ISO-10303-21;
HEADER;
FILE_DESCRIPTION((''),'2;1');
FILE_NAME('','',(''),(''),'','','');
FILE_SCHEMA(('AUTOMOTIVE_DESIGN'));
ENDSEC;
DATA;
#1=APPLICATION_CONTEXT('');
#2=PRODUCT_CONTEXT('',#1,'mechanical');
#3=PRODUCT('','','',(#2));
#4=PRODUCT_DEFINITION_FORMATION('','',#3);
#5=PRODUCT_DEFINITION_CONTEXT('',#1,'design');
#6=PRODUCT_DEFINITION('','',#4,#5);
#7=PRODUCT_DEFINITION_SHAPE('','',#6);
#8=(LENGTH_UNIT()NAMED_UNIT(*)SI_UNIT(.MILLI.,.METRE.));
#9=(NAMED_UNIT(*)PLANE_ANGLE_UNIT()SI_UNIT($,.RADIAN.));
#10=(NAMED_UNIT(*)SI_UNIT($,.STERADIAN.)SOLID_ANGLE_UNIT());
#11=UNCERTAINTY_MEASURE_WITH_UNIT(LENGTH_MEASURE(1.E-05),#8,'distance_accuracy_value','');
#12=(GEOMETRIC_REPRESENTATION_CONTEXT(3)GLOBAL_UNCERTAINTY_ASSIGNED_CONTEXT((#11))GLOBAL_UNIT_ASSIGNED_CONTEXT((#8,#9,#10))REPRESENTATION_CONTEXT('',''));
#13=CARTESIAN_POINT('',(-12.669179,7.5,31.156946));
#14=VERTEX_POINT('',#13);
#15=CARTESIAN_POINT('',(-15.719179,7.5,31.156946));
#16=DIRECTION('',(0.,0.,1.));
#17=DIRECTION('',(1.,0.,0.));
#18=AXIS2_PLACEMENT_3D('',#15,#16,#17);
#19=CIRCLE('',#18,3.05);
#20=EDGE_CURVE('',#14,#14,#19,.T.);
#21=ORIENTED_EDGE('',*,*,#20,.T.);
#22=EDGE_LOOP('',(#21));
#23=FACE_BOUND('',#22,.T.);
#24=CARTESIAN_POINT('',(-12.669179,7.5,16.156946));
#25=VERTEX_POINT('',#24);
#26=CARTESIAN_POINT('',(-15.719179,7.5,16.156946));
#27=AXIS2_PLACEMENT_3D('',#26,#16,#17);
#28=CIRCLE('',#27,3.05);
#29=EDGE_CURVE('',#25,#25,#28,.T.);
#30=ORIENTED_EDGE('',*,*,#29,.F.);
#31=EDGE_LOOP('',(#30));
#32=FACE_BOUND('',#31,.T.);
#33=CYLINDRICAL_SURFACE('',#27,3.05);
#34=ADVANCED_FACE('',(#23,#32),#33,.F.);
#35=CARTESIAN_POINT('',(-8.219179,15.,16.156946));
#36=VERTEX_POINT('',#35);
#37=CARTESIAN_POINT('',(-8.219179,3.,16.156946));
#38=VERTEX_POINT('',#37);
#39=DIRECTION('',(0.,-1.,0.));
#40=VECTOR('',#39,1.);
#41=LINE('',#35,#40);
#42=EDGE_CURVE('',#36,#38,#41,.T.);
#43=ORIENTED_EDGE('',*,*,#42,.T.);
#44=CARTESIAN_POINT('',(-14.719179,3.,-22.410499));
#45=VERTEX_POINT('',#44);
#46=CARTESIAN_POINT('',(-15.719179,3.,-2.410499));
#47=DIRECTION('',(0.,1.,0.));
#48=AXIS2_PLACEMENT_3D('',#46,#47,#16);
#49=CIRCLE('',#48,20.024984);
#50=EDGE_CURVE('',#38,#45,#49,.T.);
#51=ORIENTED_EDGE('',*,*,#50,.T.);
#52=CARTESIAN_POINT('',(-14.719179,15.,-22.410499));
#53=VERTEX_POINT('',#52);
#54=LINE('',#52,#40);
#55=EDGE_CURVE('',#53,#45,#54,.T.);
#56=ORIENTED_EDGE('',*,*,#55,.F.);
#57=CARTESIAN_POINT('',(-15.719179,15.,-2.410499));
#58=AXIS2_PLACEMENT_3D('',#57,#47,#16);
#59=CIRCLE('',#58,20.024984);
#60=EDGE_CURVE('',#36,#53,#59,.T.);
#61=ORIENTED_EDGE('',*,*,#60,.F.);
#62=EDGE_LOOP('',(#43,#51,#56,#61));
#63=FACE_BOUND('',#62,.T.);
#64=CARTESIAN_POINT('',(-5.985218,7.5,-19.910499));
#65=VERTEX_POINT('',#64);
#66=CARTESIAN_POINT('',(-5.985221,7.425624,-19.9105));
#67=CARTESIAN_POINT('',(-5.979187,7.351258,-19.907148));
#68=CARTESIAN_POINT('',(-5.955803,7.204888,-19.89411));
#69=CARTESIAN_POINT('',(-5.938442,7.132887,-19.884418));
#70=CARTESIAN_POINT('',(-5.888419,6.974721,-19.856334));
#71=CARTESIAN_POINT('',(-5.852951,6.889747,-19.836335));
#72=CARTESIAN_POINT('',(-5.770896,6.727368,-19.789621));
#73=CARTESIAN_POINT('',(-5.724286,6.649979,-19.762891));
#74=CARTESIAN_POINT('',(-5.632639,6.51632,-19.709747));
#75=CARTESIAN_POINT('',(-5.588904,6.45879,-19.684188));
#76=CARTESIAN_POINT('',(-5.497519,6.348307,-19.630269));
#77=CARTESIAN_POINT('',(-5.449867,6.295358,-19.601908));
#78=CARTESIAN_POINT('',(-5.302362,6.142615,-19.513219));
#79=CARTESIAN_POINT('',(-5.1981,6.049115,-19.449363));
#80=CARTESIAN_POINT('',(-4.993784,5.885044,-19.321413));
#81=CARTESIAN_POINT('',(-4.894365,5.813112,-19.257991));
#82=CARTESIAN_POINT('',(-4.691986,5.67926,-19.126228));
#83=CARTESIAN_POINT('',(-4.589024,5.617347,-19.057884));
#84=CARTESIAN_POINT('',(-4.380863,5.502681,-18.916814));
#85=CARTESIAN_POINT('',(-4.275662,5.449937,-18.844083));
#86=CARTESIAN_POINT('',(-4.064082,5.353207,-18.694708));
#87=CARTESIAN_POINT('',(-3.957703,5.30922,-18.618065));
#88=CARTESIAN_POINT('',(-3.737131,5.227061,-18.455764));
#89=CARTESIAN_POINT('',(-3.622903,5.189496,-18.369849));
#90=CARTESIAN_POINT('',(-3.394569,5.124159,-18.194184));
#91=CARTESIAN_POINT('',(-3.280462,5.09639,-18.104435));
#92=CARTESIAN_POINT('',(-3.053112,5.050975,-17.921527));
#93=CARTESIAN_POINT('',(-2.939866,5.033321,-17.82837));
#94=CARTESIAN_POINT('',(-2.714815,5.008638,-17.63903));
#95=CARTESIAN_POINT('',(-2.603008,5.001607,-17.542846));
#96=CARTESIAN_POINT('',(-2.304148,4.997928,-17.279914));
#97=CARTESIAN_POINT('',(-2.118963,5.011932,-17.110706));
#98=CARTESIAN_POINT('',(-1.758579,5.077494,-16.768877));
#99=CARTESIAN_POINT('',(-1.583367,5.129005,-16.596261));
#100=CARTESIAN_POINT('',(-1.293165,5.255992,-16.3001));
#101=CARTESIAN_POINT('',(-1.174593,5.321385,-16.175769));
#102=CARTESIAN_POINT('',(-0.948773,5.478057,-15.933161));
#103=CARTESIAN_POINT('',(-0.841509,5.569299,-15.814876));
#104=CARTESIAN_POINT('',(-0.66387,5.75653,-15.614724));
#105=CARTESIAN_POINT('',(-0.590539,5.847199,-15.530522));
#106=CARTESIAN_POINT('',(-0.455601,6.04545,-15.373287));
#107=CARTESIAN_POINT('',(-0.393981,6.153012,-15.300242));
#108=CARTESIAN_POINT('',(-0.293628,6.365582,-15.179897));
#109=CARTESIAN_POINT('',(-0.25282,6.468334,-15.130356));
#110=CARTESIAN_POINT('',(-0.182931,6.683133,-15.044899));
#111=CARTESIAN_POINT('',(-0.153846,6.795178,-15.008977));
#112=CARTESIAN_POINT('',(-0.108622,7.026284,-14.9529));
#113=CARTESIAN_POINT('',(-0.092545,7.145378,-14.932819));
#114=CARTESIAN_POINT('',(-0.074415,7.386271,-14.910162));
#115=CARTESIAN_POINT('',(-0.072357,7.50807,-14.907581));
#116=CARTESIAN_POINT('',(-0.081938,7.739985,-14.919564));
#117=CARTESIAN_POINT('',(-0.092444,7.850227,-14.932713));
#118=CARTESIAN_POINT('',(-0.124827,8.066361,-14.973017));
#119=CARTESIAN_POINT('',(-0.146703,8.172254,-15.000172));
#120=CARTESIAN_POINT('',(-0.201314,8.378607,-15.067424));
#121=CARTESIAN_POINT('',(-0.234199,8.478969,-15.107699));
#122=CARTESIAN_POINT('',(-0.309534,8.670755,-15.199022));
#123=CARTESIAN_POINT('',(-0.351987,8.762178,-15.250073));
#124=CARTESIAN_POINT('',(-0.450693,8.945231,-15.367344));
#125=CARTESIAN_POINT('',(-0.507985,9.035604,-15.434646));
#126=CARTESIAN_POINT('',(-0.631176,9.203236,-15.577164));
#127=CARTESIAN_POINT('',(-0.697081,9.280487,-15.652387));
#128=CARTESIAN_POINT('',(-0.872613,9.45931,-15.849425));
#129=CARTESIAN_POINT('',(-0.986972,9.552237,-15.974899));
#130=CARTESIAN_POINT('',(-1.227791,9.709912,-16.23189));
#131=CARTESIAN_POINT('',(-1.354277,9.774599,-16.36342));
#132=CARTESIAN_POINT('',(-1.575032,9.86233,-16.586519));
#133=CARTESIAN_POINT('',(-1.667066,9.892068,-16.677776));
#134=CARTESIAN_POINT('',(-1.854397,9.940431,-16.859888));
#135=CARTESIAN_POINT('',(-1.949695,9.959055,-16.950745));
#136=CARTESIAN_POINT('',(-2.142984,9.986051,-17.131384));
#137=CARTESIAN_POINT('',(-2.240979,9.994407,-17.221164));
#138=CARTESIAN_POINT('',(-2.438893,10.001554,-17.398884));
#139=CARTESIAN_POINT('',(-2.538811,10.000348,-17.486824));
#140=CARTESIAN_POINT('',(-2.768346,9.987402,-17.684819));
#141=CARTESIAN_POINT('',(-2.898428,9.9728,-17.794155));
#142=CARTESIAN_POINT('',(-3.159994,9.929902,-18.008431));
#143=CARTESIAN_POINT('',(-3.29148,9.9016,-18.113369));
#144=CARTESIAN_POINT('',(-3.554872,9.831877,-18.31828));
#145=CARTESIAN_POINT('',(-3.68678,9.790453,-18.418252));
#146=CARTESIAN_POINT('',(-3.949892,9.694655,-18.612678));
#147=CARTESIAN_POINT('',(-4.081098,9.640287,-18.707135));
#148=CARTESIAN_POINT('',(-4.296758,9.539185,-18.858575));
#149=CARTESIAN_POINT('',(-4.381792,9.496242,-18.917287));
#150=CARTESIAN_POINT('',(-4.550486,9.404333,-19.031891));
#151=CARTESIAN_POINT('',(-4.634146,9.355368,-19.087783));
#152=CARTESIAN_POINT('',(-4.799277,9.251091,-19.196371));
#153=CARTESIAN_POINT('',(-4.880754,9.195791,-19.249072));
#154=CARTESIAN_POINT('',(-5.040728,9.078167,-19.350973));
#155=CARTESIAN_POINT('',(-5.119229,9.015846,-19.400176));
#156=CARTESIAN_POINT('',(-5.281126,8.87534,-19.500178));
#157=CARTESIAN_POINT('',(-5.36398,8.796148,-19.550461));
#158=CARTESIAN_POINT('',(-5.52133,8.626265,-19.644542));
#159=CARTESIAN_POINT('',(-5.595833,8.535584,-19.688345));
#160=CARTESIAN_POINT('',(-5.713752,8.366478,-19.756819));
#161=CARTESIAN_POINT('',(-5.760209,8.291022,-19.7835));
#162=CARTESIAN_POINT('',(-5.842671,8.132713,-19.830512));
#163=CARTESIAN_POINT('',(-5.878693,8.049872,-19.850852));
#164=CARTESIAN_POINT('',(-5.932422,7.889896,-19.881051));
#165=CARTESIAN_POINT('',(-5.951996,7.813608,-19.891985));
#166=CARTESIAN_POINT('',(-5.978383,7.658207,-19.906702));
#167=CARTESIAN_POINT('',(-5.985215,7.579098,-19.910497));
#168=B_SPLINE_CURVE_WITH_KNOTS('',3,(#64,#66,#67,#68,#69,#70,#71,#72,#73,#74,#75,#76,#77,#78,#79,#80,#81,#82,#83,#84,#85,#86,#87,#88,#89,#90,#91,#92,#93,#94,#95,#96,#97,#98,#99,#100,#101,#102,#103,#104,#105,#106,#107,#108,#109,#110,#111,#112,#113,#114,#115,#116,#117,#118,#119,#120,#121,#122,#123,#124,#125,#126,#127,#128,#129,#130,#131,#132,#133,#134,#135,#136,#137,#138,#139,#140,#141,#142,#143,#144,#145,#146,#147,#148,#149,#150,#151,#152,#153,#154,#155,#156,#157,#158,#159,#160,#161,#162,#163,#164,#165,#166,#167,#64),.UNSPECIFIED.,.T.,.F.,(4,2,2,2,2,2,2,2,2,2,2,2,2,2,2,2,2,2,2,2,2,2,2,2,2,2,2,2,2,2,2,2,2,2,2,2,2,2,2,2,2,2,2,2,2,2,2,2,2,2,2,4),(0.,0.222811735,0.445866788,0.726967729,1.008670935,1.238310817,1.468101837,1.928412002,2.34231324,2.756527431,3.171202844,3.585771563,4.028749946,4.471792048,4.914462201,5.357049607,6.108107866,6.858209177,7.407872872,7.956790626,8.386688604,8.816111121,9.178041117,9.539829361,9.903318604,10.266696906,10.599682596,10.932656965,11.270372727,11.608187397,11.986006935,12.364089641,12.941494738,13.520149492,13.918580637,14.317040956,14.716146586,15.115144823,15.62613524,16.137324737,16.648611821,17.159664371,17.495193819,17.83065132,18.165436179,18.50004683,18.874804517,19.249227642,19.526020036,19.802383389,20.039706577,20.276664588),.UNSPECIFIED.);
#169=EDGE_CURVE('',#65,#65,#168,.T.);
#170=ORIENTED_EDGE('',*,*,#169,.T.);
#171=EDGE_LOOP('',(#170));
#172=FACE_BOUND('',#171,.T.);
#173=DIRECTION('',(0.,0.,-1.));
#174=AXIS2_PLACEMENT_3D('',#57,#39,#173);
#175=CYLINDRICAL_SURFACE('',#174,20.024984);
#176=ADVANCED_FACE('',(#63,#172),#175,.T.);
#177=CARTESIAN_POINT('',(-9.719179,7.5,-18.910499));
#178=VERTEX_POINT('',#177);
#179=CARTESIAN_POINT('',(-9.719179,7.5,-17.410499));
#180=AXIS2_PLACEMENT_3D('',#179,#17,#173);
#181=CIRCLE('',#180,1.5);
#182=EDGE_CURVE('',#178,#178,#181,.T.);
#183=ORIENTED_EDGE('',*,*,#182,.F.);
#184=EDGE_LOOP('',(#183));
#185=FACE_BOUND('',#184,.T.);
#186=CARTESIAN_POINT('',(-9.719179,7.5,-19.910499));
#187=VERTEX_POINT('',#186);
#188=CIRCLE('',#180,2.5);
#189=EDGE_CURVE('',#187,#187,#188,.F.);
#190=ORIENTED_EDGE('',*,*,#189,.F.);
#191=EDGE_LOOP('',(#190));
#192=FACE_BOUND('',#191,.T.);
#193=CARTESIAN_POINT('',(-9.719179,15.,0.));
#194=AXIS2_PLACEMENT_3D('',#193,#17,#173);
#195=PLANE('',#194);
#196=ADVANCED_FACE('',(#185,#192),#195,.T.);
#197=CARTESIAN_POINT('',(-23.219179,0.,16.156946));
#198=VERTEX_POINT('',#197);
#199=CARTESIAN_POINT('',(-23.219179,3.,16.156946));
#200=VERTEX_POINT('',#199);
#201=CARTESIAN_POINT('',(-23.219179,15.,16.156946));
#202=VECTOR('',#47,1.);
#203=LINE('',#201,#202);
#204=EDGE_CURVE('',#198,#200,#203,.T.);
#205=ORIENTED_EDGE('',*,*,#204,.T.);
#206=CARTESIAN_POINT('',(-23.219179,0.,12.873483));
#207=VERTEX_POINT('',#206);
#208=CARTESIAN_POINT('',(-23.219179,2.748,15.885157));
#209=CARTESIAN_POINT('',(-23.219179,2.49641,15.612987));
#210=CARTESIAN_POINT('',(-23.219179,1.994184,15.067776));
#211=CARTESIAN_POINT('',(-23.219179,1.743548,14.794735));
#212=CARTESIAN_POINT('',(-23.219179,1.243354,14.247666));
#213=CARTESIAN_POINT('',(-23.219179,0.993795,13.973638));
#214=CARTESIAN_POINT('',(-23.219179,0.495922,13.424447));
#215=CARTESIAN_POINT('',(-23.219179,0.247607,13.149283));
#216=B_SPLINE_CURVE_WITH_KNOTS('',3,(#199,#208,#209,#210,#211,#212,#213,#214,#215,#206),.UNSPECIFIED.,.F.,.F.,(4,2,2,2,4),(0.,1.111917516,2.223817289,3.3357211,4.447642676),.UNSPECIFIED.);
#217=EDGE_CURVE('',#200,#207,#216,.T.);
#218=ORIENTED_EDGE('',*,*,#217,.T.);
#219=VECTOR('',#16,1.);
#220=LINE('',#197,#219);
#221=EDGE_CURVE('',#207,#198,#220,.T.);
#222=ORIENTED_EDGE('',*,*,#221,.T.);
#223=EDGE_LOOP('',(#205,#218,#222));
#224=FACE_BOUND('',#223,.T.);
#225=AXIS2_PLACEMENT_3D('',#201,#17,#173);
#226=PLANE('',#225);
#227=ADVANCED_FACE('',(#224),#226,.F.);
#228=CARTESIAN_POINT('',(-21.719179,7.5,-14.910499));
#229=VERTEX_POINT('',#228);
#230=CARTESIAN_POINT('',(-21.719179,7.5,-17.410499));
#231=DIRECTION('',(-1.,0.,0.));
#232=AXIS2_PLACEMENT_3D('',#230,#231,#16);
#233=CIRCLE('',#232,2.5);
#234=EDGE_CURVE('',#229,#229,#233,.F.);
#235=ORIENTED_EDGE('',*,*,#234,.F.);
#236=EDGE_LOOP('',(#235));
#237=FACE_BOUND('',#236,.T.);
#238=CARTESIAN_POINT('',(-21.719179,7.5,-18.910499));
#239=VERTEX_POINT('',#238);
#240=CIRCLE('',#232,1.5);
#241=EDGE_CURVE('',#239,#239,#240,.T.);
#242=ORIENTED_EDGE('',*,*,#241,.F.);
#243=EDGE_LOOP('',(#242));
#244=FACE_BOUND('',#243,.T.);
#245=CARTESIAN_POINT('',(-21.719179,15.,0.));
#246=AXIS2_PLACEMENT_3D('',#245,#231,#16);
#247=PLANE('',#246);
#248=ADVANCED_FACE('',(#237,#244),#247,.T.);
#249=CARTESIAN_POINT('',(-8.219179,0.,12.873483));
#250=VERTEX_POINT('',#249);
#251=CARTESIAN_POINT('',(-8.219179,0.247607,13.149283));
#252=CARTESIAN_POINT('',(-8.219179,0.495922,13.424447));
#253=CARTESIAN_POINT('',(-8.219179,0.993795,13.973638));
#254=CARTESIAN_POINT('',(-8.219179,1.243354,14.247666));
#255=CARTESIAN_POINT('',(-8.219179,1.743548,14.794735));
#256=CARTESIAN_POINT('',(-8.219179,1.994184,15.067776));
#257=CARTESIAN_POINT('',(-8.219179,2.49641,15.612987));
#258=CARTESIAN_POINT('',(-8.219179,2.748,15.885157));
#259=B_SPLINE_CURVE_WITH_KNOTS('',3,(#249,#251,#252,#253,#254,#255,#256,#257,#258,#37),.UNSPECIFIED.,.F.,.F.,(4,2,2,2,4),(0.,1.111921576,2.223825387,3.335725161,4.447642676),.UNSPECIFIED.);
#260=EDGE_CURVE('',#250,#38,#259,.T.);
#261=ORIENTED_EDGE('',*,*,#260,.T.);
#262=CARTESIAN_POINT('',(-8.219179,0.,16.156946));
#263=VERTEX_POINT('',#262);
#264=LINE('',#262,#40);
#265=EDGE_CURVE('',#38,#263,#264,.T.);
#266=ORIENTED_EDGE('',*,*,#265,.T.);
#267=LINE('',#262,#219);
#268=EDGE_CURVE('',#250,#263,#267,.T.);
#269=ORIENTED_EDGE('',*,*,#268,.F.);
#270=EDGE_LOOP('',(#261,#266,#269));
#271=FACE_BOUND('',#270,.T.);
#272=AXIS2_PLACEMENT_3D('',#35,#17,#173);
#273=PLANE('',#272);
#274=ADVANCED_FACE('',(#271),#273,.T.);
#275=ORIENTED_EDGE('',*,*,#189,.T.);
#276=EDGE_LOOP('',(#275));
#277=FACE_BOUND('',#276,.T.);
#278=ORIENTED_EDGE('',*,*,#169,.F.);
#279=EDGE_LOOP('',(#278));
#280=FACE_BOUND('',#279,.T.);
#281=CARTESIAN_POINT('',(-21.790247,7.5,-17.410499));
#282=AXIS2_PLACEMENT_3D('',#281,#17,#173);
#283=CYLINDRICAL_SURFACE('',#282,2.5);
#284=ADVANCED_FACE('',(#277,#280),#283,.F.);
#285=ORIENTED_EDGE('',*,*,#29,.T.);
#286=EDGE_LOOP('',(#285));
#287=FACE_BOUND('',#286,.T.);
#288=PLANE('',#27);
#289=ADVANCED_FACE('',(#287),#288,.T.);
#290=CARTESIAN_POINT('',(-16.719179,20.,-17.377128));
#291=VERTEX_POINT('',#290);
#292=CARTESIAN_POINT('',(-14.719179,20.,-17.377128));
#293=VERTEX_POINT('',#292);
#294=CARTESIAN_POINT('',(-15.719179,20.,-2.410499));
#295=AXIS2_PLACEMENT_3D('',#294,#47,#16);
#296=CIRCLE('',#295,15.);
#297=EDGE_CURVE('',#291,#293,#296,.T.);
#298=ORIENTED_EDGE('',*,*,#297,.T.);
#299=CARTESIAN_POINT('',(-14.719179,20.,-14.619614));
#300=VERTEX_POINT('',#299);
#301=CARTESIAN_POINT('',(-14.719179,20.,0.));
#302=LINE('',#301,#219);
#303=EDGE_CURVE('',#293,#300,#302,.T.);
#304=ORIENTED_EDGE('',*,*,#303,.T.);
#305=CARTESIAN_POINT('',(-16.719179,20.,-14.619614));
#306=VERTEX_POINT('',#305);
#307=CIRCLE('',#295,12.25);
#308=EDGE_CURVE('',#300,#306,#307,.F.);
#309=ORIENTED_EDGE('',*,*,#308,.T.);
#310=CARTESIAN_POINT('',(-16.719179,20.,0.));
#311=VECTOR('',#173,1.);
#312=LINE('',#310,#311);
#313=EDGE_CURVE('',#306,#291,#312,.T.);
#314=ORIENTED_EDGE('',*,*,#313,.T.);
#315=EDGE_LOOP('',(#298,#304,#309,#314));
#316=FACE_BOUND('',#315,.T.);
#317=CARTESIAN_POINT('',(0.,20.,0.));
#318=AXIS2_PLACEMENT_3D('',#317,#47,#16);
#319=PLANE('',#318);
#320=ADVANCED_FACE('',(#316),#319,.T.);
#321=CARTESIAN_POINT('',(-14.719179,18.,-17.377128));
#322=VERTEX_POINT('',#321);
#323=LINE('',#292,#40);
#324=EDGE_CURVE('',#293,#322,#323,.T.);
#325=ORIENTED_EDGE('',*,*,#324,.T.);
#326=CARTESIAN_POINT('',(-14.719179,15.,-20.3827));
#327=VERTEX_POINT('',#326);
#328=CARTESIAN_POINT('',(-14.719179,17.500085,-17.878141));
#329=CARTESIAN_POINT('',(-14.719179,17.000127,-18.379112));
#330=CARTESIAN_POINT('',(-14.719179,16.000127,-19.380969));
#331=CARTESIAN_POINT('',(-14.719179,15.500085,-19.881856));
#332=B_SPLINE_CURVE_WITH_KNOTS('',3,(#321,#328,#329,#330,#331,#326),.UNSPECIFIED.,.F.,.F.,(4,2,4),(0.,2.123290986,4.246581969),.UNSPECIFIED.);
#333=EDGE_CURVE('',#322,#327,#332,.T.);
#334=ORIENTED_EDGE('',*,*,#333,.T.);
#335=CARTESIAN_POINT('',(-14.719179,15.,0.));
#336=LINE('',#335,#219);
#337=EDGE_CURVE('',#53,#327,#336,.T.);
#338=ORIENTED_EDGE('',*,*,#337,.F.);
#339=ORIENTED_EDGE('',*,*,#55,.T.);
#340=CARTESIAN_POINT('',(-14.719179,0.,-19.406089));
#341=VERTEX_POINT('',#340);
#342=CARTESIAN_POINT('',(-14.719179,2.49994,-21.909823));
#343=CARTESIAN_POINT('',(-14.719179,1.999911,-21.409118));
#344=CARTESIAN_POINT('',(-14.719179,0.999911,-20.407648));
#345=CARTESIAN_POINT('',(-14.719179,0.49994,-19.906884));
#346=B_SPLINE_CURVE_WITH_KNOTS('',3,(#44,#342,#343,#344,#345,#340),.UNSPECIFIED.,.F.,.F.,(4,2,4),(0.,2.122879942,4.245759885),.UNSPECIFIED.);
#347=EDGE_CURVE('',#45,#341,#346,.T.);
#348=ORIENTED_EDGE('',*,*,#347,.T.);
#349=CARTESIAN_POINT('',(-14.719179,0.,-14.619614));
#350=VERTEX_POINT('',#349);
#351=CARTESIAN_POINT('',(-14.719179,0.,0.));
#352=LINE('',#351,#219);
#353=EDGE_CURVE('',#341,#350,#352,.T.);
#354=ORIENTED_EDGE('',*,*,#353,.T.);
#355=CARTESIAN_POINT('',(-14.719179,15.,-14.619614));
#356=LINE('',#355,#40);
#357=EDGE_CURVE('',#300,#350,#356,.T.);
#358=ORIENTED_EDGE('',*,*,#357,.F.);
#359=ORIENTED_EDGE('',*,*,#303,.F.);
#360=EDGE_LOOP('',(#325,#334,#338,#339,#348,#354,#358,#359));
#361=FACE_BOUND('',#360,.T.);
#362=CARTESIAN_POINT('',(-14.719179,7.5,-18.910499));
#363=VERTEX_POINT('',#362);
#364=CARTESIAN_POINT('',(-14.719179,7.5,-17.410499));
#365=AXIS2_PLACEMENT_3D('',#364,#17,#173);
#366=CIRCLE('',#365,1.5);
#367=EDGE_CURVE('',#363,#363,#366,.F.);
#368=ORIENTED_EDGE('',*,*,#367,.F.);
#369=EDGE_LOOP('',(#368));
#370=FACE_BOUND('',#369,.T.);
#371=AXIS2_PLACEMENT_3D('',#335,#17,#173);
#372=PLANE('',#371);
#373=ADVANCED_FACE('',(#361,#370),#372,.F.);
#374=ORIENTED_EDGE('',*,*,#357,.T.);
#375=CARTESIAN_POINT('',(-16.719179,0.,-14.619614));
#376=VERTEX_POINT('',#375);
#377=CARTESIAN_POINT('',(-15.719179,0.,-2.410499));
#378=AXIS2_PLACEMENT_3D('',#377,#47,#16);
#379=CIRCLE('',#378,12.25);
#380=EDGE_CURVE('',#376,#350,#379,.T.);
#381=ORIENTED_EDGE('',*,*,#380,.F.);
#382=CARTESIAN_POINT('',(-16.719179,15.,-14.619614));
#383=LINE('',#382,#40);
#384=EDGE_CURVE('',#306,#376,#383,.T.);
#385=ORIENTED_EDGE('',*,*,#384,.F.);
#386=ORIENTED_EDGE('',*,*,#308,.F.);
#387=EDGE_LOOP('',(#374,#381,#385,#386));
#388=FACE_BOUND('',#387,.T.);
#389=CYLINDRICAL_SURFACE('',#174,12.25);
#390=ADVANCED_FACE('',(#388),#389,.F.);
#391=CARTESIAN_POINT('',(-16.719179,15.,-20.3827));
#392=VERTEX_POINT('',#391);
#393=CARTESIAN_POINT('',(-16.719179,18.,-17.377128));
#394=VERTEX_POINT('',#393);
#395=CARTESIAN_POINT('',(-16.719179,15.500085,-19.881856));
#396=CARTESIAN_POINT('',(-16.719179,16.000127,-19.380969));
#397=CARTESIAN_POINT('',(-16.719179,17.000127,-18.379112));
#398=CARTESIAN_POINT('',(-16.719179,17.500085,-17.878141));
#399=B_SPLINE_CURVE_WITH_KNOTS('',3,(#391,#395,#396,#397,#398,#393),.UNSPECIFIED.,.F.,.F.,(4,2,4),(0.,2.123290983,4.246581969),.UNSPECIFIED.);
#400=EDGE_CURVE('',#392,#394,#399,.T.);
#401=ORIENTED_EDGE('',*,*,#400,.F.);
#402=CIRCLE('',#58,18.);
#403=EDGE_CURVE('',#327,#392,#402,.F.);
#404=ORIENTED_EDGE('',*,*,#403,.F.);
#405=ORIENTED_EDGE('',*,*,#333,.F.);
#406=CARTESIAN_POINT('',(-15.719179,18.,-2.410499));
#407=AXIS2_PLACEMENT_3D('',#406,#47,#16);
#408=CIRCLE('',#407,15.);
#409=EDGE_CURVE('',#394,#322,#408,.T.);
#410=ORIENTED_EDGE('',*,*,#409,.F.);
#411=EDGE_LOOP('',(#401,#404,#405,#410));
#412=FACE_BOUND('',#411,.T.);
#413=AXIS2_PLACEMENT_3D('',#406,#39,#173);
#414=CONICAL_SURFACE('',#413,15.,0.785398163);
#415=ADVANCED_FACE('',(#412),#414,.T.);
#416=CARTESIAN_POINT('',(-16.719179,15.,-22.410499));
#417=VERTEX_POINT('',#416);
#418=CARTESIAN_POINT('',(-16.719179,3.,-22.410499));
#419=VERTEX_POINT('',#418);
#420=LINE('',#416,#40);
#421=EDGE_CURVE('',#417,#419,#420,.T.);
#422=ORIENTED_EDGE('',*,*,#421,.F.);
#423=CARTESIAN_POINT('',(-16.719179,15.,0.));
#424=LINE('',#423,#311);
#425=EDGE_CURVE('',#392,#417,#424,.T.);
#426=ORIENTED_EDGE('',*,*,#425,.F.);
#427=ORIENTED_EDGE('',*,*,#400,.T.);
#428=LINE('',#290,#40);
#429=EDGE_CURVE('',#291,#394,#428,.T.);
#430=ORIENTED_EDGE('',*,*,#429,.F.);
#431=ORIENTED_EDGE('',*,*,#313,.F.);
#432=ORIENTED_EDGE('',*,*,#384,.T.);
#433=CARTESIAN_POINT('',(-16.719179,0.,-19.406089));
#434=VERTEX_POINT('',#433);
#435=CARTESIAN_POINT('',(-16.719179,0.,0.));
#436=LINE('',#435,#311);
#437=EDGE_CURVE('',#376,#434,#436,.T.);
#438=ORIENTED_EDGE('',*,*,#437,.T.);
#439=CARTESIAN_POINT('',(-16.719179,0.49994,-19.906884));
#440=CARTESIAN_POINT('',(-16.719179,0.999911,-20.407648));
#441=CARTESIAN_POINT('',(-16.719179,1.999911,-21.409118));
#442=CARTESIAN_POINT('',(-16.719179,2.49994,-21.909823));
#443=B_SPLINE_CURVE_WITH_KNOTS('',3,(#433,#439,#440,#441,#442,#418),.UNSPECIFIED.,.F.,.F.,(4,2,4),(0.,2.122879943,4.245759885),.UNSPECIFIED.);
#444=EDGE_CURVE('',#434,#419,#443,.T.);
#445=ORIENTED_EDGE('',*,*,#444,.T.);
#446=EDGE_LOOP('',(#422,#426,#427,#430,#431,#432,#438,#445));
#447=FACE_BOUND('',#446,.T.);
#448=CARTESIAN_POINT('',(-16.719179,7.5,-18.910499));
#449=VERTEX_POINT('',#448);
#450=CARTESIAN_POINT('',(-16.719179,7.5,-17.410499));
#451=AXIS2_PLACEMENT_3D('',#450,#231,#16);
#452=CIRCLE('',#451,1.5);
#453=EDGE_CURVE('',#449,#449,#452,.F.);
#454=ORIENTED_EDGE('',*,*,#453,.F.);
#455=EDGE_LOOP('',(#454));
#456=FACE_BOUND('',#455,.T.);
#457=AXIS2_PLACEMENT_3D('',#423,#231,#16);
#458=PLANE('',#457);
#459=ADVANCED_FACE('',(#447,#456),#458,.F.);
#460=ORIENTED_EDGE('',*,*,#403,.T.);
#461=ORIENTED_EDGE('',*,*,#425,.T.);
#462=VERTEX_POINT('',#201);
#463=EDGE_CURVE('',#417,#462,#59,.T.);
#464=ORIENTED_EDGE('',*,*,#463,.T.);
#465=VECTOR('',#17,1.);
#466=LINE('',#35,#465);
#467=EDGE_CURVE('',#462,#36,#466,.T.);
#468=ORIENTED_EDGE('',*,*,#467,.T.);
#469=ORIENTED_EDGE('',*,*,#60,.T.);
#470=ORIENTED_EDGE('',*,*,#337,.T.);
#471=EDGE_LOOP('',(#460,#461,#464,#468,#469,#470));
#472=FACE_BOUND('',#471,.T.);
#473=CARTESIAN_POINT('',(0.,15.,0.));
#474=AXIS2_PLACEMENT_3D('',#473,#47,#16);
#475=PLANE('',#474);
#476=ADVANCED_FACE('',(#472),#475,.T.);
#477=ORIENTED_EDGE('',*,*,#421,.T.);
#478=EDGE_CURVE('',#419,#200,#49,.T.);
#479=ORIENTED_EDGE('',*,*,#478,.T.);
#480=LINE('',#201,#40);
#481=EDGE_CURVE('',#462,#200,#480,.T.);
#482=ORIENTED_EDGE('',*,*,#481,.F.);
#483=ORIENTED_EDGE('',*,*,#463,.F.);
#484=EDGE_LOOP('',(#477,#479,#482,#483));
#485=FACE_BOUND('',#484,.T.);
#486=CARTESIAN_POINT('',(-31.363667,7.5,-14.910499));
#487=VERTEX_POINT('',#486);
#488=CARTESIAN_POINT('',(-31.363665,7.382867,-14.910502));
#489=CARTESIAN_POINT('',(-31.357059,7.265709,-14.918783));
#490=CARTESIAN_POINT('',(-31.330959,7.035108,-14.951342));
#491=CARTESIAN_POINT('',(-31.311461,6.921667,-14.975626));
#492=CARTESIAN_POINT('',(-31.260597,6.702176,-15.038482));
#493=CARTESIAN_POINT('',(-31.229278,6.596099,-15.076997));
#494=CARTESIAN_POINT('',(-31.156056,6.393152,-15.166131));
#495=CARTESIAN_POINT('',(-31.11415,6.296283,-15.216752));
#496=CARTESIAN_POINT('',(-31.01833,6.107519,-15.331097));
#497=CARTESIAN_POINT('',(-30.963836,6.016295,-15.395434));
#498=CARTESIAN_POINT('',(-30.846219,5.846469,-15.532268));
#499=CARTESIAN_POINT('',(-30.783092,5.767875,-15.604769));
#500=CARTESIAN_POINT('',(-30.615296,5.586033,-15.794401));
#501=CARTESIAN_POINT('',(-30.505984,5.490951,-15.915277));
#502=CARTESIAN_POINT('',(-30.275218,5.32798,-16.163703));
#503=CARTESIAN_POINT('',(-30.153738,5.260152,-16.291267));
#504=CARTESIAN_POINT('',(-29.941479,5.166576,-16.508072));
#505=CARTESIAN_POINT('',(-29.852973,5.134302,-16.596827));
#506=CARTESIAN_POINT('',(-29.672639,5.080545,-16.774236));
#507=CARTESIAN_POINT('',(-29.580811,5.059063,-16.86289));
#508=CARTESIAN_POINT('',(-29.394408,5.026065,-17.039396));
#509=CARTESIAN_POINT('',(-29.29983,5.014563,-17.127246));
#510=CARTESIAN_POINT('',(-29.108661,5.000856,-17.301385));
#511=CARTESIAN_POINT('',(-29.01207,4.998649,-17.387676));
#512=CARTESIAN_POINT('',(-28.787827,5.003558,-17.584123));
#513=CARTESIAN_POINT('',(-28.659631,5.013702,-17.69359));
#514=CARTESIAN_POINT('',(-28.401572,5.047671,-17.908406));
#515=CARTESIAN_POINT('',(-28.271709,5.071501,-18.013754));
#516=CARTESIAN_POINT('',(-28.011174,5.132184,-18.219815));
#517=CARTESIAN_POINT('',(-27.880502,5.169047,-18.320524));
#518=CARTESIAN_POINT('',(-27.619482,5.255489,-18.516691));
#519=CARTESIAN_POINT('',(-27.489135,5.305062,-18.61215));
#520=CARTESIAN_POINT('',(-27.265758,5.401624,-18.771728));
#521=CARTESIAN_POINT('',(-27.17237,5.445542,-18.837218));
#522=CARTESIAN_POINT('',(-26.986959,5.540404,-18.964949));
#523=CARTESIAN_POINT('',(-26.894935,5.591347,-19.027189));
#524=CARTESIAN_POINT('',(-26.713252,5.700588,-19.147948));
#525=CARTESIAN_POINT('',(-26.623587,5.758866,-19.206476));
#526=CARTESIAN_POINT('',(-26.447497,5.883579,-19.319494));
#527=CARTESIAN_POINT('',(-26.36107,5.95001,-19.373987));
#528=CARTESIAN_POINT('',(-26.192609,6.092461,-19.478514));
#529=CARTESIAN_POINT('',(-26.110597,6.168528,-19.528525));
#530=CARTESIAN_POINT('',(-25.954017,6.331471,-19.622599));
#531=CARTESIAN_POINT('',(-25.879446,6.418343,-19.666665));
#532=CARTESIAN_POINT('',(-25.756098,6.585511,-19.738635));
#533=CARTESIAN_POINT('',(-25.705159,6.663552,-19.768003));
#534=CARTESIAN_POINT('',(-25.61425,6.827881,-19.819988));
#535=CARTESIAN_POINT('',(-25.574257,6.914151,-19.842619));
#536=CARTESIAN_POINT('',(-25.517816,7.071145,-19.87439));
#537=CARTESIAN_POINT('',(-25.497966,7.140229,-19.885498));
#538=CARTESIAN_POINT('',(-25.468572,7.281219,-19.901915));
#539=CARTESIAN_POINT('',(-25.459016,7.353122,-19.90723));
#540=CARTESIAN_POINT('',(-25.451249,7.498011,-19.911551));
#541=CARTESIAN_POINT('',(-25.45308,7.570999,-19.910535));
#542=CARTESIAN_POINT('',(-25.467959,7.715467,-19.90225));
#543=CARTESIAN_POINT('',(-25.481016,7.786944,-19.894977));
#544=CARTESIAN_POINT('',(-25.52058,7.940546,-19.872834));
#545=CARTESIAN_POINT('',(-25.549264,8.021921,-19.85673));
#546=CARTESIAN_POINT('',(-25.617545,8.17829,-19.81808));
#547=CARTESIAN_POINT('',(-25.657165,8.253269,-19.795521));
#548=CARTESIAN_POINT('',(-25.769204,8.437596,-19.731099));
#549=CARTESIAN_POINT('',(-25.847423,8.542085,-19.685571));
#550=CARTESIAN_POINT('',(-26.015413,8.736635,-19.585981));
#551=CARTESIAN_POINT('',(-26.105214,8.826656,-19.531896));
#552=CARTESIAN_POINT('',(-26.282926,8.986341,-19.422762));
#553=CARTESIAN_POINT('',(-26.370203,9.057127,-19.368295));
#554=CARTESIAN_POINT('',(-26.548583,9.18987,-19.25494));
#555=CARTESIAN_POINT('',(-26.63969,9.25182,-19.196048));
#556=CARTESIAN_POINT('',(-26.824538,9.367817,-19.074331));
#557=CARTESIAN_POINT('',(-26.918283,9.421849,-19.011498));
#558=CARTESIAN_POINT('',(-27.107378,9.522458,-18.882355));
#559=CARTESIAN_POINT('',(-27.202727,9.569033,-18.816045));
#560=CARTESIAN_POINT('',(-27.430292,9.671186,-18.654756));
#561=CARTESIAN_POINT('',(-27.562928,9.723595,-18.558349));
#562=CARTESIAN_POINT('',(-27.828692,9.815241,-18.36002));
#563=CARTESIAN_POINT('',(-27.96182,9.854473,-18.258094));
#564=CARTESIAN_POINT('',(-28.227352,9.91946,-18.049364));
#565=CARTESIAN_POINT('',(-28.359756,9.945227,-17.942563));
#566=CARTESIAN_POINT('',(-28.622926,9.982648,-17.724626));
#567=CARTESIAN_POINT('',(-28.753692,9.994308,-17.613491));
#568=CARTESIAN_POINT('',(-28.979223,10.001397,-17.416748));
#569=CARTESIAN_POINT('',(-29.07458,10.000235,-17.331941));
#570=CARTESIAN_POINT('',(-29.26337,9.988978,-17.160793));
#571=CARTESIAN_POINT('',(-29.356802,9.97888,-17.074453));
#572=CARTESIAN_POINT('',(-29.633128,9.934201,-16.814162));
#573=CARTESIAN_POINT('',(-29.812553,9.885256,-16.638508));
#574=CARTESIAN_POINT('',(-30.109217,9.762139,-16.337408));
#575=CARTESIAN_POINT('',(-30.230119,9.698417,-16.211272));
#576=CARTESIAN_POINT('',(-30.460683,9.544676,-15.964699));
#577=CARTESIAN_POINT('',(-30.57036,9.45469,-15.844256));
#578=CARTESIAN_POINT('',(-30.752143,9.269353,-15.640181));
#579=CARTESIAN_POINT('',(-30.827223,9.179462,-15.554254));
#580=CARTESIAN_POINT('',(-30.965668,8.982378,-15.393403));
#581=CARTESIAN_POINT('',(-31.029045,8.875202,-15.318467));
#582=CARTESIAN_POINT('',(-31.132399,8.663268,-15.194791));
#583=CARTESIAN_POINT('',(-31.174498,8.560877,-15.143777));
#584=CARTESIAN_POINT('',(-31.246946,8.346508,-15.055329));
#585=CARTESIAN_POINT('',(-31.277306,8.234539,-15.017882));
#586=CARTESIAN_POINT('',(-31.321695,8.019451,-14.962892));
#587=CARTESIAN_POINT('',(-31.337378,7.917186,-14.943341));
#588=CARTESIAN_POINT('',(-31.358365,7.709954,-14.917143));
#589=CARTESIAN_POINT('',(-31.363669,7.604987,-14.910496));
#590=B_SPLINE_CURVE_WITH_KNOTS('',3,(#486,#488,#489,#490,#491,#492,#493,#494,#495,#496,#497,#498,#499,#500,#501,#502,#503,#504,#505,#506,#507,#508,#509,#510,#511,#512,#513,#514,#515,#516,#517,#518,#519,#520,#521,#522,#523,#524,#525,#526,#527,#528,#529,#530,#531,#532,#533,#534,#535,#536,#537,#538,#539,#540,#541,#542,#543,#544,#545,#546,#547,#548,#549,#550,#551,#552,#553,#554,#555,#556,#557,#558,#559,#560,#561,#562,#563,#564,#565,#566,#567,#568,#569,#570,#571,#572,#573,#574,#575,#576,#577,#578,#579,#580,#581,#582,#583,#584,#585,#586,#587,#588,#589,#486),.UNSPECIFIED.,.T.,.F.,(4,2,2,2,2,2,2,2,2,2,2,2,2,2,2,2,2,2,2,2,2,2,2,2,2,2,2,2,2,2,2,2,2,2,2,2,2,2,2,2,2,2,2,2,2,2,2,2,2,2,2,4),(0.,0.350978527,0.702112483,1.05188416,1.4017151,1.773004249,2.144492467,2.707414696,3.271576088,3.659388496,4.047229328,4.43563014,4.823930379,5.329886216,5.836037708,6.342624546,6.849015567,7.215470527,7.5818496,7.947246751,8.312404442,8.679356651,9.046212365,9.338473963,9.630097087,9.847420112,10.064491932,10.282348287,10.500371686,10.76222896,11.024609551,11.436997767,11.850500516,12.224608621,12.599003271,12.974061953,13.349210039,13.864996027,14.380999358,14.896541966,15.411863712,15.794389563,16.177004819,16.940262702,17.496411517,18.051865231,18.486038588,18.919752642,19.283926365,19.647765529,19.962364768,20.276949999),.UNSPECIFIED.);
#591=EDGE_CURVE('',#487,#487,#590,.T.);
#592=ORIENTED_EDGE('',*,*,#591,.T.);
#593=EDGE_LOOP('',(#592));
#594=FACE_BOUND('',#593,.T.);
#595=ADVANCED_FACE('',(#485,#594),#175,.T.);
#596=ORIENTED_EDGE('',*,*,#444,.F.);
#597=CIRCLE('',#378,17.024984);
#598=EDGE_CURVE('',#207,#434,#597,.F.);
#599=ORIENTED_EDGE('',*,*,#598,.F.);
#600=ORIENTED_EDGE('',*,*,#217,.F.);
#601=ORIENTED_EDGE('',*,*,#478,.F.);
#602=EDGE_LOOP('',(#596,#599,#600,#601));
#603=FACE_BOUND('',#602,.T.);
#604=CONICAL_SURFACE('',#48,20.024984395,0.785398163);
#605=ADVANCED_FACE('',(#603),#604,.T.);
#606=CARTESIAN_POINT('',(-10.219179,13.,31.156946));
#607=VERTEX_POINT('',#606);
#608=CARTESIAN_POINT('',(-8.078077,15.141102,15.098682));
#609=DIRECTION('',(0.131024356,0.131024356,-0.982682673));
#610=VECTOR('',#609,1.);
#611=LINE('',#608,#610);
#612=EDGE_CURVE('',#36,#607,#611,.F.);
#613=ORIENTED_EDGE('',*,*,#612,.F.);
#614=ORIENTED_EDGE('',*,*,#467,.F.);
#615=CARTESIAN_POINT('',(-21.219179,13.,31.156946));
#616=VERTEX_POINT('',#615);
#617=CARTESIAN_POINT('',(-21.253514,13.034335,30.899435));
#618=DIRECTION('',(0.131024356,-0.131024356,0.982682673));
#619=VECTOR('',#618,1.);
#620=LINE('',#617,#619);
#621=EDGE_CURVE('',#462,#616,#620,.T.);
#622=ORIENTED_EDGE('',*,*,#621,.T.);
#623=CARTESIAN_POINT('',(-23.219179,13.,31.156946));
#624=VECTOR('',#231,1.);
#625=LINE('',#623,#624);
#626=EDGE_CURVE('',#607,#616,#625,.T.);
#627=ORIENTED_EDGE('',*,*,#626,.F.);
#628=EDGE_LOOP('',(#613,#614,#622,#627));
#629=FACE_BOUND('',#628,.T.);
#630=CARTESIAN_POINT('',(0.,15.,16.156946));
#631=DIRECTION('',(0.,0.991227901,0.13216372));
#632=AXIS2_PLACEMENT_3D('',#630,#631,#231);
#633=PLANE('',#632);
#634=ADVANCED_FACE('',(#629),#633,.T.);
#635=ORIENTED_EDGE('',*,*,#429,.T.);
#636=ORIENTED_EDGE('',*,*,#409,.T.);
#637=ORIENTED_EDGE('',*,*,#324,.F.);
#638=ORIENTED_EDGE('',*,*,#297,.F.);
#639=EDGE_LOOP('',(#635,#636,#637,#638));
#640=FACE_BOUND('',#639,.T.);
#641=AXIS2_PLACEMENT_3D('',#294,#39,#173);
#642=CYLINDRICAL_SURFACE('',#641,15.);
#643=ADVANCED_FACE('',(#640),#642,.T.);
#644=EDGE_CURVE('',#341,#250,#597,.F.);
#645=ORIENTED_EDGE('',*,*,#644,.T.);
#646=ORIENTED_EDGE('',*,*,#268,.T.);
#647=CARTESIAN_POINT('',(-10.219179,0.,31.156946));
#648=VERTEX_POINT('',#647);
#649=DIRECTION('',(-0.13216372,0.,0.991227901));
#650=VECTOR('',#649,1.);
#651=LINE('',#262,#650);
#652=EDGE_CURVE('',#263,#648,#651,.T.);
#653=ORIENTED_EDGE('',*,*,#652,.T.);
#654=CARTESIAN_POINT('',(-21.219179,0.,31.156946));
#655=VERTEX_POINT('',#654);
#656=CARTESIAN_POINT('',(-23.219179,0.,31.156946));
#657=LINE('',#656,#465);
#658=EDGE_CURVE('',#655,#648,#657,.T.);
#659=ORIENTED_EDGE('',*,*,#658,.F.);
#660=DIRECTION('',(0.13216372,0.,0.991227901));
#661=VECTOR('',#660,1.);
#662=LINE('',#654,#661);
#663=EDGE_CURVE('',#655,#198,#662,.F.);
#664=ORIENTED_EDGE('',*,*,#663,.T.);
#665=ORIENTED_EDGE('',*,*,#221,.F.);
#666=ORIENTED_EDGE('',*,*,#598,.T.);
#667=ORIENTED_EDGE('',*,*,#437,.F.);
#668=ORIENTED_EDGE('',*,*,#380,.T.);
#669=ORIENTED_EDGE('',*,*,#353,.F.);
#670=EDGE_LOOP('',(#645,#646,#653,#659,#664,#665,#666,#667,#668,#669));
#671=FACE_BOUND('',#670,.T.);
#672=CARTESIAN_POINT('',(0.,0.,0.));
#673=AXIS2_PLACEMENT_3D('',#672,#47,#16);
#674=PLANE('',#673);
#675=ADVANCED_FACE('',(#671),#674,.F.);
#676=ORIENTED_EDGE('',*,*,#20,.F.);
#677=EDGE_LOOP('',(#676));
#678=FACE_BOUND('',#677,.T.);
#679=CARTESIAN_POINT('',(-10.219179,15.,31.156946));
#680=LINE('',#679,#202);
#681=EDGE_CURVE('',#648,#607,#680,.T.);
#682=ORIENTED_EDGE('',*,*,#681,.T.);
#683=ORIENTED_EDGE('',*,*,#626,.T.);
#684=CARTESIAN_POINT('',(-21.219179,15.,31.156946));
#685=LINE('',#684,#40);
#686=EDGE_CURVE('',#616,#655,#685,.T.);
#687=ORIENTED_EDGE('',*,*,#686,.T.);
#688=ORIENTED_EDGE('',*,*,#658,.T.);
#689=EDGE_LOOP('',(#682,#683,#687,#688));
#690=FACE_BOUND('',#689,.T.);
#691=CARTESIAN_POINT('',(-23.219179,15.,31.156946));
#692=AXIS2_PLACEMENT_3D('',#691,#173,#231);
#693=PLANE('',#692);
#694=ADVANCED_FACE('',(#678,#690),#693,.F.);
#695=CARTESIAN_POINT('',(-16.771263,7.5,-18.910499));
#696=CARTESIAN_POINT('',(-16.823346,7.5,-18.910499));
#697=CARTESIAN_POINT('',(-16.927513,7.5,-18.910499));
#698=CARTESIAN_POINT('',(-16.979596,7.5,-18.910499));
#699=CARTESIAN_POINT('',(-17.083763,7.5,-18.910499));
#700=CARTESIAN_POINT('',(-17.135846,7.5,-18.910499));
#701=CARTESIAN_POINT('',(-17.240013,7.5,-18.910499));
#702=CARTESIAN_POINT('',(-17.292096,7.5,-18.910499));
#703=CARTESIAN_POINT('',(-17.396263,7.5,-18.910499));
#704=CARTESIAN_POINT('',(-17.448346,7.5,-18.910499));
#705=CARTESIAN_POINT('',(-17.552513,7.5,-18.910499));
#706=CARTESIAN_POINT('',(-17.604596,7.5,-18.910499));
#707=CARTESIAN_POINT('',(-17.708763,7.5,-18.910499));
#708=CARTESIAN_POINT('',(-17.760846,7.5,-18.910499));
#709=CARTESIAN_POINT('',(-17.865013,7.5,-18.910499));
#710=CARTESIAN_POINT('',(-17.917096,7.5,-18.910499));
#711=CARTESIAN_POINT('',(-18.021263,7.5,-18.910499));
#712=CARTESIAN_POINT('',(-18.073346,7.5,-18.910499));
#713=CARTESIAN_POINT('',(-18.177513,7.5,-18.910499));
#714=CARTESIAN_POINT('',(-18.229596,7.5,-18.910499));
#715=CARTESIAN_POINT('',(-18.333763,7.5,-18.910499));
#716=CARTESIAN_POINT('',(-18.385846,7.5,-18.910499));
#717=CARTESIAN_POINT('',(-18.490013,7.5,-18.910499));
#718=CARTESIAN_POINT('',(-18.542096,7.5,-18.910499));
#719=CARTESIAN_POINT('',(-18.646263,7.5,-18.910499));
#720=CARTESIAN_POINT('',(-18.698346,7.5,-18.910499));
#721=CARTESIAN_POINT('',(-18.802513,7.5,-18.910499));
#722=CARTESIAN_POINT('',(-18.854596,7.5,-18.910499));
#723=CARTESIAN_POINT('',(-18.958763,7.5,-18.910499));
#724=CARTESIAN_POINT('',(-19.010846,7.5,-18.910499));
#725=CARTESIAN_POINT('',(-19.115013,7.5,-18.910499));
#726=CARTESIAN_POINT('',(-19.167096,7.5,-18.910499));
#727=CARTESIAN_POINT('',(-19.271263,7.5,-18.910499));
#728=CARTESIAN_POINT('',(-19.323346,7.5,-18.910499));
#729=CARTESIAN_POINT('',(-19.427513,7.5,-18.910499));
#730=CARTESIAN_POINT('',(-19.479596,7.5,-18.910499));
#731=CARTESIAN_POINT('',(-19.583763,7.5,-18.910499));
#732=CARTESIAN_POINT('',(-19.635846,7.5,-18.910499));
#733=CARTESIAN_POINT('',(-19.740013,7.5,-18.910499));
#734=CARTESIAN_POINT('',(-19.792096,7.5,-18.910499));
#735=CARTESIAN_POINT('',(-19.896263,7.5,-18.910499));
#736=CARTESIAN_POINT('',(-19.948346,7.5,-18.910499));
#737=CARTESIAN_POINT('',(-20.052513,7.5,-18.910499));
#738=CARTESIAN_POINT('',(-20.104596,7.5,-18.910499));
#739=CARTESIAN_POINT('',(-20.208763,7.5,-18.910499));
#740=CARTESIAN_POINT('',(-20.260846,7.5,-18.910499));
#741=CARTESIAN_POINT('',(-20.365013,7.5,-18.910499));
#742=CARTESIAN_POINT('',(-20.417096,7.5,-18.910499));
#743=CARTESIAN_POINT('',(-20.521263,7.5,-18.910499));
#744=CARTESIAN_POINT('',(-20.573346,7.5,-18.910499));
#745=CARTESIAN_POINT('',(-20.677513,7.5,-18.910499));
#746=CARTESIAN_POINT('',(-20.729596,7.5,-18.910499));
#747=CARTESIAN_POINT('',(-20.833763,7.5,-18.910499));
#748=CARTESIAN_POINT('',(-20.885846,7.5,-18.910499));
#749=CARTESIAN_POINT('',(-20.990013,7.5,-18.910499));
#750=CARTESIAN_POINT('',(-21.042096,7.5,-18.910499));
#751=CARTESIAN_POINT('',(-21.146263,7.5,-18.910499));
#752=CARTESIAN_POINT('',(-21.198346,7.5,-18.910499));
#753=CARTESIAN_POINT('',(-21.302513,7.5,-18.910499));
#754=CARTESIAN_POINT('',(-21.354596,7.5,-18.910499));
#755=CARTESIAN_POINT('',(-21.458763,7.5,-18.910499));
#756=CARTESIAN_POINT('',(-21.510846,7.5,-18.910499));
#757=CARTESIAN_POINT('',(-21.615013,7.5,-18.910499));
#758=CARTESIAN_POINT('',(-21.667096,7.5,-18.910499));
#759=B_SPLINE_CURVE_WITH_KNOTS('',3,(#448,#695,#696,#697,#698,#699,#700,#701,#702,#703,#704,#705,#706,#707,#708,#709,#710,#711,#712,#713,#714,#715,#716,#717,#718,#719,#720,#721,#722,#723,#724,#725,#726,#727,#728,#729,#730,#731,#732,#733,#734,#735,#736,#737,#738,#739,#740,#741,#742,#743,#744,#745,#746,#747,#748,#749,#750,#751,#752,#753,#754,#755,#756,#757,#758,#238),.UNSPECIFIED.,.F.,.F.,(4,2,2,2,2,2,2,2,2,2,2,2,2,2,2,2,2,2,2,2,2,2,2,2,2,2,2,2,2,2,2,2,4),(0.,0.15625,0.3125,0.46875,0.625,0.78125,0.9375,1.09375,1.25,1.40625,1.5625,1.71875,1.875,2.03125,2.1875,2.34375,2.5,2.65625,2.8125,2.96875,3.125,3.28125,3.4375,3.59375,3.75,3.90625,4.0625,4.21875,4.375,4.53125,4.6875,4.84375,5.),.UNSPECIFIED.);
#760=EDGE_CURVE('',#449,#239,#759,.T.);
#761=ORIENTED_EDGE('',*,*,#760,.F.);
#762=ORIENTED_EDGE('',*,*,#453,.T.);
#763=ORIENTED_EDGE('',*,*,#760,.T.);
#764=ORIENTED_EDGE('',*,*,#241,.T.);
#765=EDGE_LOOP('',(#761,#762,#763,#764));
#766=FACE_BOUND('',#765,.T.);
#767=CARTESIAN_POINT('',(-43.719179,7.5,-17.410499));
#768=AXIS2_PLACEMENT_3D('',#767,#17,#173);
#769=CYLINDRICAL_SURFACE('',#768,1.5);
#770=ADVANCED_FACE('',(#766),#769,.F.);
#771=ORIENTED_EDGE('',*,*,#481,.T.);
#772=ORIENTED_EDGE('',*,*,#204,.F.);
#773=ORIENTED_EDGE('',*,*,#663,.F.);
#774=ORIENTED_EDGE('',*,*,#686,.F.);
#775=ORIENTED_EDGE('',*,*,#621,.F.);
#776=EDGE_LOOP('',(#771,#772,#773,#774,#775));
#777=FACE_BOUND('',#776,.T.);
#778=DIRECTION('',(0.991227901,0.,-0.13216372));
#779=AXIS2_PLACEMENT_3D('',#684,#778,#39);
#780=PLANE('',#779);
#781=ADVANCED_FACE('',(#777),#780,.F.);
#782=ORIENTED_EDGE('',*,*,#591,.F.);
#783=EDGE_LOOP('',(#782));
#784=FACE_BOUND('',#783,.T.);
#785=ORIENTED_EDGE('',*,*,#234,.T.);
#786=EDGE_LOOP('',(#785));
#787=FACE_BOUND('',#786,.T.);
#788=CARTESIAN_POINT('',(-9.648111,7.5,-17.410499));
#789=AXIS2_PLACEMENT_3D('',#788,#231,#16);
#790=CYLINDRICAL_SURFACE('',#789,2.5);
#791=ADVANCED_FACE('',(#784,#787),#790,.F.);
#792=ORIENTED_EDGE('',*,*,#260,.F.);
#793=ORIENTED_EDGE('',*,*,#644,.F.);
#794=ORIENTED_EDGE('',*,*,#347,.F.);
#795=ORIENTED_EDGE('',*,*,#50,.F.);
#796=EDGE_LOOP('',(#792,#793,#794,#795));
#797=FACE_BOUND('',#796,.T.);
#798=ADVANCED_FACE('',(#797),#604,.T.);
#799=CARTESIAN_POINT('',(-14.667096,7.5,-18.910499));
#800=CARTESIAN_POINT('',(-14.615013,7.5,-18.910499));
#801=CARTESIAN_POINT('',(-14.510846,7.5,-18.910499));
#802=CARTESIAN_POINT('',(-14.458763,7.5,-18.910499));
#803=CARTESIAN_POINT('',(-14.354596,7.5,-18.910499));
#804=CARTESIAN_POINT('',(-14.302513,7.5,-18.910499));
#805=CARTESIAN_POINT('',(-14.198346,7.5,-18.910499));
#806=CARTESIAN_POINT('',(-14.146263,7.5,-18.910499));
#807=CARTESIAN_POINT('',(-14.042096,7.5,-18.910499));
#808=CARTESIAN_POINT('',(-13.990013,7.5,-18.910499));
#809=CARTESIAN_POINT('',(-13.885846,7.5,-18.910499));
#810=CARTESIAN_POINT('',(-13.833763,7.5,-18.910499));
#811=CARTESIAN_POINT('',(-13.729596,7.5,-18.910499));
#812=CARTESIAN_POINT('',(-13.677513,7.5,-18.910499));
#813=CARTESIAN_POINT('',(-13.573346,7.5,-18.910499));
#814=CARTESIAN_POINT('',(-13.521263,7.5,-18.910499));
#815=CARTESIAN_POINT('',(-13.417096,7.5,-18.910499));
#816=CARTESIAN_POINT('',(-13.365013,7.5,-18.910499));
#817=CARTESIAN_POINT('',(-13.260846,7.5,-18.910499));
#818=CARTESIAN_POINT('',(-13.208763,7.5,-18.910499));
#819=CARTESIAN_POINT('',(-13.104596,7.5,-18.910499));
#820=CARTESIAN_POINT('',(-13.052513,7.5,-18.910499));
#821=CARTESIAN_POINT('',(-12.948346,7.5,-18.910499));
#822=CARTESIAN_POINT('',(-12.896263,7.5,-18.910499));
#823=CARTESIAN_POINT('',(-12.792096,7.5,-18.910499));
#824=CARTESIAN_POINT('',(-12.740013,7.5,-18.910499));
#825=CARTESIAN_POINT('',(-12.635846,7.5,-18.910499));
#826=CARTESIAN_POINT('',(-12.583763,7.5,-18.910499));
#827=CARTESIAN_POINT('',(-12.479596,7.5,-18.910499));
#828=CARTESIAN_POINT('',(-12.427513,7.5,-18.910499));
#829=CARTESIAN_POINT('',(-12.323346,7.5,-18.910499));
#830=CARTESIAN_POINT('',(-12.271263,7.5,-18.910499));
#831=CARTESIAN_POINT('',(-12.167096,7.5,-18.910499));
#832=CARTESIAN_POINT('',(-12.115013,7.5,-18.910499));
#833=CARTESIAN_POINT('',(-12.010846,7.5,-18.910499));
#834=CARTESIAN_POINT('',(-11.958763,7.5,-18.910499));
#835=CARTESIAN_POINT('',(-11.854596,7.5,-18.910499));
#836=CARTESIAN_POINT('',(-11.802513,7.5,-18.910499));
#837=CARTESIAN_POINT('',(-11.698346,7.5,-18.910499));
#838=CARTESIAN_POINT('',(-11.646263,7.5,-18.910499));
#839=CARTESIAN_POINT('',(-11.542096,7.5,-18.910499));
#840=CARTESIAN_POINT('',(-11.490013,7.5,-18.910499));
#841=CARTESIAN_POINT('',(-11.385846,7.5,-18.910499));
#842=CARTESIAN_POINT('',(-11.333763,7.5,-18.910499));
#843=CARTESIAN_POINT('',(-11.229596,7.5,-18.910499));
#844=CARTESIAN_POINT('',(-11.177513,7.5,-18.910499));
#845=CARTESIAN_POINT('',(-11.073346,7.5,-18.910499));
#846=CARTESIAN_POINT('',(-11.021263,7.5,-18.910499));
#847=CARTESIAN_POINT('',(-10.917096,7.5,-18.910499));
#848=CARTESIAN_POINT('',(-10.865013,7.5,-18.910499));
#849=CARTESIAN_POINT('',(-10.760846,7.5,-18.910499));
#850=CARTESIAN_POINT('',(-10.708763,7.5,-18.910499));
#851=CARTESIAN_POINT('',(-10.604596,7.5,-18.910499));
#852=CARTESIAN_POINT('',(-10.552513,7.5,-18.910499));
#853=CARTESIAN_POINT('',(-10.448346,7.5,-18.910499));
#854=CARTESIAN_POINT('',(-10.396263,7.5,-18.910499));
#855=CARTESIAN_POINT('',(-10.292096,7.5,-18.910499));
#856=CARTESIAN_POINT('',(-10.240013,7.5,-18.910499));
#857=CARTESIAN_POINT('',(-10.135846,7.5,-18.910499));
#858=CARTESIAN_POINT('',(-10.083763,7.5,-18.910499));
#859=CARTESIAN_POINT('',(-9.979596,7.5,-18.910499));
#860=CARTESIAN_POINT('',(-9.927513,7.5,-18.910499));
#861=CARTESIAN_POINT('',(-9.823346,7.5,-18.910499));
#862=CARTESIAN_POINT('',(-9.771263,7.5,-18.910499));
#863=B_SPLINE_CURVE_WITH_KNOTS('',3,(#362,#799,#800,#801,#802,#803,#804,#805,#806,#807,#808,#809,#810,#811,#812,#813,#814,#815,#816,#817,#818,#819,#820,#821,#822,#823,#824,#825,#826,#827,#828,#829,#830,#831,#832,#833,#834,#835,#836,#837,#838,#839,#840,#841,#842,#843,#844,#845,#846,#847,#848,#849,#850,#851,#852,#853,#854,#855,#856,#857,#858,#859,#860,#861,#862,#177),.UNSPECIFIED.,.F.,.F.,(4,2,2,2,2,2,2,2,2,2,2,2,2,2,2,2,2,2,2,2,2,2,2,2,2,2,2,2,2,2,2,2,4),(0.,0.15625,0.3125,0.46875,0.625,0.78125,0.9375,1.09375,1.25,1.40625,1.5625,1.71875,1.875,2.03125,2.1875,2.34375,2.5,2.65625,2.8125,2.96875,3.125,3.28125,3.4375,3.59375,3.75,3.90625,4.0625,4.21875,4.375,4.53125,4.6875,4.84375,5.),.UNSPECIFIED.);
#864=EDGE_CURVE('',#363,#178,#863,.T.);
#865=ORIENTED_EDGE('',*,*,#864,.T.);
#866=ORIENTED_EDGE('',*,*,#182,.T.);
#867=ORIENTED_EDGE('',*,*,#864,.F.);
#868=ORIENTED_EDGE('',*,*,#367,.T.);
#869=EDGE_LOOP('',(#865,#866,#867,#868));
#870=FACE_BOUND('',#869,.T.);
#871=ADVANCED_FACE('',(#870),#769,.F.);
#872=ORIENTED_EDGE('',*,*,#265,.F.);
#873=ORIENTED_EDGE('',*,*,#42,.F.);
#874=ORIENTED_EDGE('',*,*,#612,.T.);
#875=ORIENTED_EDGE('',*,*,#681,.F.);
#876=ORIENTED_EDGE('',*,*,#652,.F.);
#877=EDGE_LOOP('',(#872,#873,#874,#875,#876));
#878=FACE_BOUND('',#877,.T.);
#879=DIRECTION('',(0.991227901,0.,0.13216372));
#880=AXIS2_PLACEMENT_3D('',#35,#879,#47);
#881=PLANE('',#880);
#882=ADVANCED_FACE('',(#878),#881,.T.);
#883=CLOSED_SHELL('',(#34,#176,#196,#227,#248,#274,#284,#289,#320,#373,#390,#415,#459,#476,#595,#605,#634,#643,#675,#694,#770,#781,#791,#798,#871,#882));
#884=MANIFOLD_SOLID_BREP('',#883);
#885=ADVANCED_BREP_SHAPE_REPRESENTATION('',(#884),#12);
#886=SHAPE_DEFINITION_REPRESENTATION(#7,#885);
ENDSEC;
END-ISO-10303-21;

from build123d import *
from OCP.BRepFilletAPI import BRepFilletAPI_MakeChamfer

# Parameters (mm, degrees)
BOSS_EXTRUDE1_DEPTH     = 15
SKETCH2_R               = 3.05
CUT_EXTRUDE1_DEPTH      = 15
BOSS_EXTRUDE2_DEPTH     = 5
CHAMFER4_SIZE           = 3
CHAMFER6_SIZE           = 15
CHAMFER6_SIZE_2         = 2
CUT_EXTRUDE2_DEPTH      = 29
CUT_EXTRUDE2_DEPTH_BACK = 25
SKETCH4_R               = 1.5
SKETCH5_R               = 2.5
CUT_EXTRUDE3_DEPTH      = 14.024984395
CUT_EXTRUDE4_START      = -14.024984395
SKETCH6_R               = 2.5
CUT_EXTRUDE4_DEPTH      = 14.024984395


with BuildPart() as part:
    # Sketch1 → Boss-Extrude1 (new body)
    with BuildSketch(Plane(origin=(0, 0, 0), x_dir=(1, 0, 0), z_dir=(0, 1, 0))):
        with BuildLine():
            ThreePointArc((-14.719179189, 14.619614321), (-15.719179189, -9.839501126), (-16.719179189, 14.619614321))
            Line((-16.719179189, 14.619614321), (-16.719179189, 22.410498874))
            ThreePointArc((-16.719179189, 22.410498874), (-35.465683849, 5.738494325), (-23.219179189, -16.156945753))
            Line((-23.219179189, -16.156945753), (-23.219179189, -31.156945753))
            Line((-23.219179189, -31.156945753), (-8.219179189, -31.156945753))
            Line((-8.219179189, -31.156945753), (-8.219179189, -16.156945753))
            ThreePointArc((-8.219179189, -16.156945753), (4.02732547, 5.738494325), (-14.719179189, 22.410498874))
            Line((-14.719179189, 22.410498874), (-14.719179189, 14.619614321))
        make_face()
    extrude(amount=BOSS_EXTRUDE1_DEPTH)

    # Sketch2 → Cut-Extrude1 (cut)
    with BuildSketch(Plane.XY.offset(31.156945753)):
        with Locations((-15.719179189, 7.5)):
            Circle(SKETCH2_R)
    extrude(amount=-CUT_EXTRUDE1_DEPTH, mode=Mode.SUBTRACT)

    # Sketch3 → Boss-Extrude2 (add)
    with BuildSketch(Plane(origin=(0, 15, 0), x_dir=(1, 0, 0), z_dir=(0, 1, 0))):
        with BuildLine():
            Line((-16.719179189, 14.619614321), (-16.719179189, 17.377128421))
            ThreePointArc((-16.719179189, 17.377128421), (-25.966129955, -8.543952276), (-0.719179189, 2.410498874))
            ThreePointArc((-0.719179189, 2.410498874), (-4.764728039, 12.65744964), (-14.719179189, 17.377128421))
            Line((-14.719179189, 17.377128421), (-14.719179189, 14.619614321))
            ThreePointArc((-14.719179189, 14.619614321), (-6.710502816, 10.711477732), (-3.469179189, 2.410498874))
            ThreePointArc((-3.469179189, 2.410498874), (-24.020158047, -6.598177499), (-16.719179189, 14.619614321))
        make_face()
    extrude(amount=BOSS_EXTRUDE2_DEPTH)

    # Chamfer4
    chamfer4_edges = [part.edges().sort_by_distance(p)[0] for p in [
        (-25.966129955, 15, 8.543952276),
        (-35.465683849, 0, -5.738494325),
        (4.02732547, 0, -5.738494325),
    ]]
    chamfer(chamfer4_edges, length=CHAMFER4_SIZE)

    # Chamfer6
    chamfer6_edges_1 = [part.edges().sort_by_distance(p)[0] for p in [
        (-23.219179189, 7.5, 31.156945753),
    ]]
    chamfer6_side_1 = [part.faces().sort_by_distance(p)[0] for p in [
        (-23.219179189, 7.5, 31.116945753),
    ]]
    chamfer6_edges_2 = [part.edges().sort_by_distance(p)[0] for p in [
        (-8.219179189, 7.5, 31.156945753),
    ]]
    chamfer6_side_2 = [part.faces().sort_by_distance(p)[0] for p in [
        (-8.259179189, 7.5, 31.156945753),
    ]]
    chamfer6_edges_3 = [part.edges().sort_by_distance(p)[0] for p in [
        (-15.719179189, 15, 31.156945753),
    ]]
    chamfer6_side_3 = [part.faces().sort_by_distance(p)[0] for p in [
        (-15.719179189, 14.96, 31.156945753),
    ]]
    chamfer6 = BRepFilletAPI_MakeChamfer(part.part.solid().wrapped)
    for e in chamfer6_edges_1:
        chamfer6.Add(CHAMFER6_SIZE - 0.0001, CHAMFER6_SIZE_2 - 0.0001, e.wrapped, chamfer6_side_1[0].wrapped)
    for e in chamfer6_edges_2:
        chamfer6.Add(CHAMFER6_SIZE_2 - 0.0001, CHAMFER6_SIZE - 0.0001, e.wrapped, chamfer6_side_2[0].wrapped)
    for e in chamfer6_edges_3:
        chamfer6.Add(CHAMFER6_SIZE_2 - 0.0001, CHAMFER6_SIZE - 0.0001, e.wrapped, chamfer6_side_3[0].wrapped)
    add(Compound.cast(chamfer6.Shape()), mode=Mode.REPLACE)  # a hair under: the kernel refuses the full size

    # Sketch4 → Cut-Extrude2 (cut, two sides: drawn at the far end of the back side and taken through both)
    with BuildSketch(Plane.ZY.offset(14.719179189).offset(-CUT_EXTRUDE2_DEPTH_BACK)):
        with Locations(Location((-17.410498874, 7.5, 0), (0, 0, 180))):
            Circle(SKETCH4_R)
    extrude(amount=CUT_EXTRUDE2_DEPTH + CUT_EXTRUDE2_DEPTH_BACK, mode=Mode.SUBTRACT)

    # Sketch5 → Cut-Extrude3 (cut)
    with BuildSketch(Plane(origin=(4.305805205, 0, 0), x_dir=(0, 0, -1), z_dir=(1, 0, 0))):
        with Locations((17.410498874, 7.5)):
            Circle(SKETCH5_R)
    extrude(amount=-CUT_EXTRUDE3_DEPTH, mode=Mode.SUBTRACT)

    # Sketch6 → Cut-Extrude4 (cut)
    with BuildSketch(Plane.ZY.offset(35.744163584).offset(CUT_EXTRUDE4_START)):
        with Locations(Location((-17.410498874, 7.5, 0), (0, 0, 180))):
            Circle(SKETCH6_R)
    extrude(amount=CUT_EXTRUDE4_DEPTH, mode=Mode.SUBTRACT)


solid = part.part
